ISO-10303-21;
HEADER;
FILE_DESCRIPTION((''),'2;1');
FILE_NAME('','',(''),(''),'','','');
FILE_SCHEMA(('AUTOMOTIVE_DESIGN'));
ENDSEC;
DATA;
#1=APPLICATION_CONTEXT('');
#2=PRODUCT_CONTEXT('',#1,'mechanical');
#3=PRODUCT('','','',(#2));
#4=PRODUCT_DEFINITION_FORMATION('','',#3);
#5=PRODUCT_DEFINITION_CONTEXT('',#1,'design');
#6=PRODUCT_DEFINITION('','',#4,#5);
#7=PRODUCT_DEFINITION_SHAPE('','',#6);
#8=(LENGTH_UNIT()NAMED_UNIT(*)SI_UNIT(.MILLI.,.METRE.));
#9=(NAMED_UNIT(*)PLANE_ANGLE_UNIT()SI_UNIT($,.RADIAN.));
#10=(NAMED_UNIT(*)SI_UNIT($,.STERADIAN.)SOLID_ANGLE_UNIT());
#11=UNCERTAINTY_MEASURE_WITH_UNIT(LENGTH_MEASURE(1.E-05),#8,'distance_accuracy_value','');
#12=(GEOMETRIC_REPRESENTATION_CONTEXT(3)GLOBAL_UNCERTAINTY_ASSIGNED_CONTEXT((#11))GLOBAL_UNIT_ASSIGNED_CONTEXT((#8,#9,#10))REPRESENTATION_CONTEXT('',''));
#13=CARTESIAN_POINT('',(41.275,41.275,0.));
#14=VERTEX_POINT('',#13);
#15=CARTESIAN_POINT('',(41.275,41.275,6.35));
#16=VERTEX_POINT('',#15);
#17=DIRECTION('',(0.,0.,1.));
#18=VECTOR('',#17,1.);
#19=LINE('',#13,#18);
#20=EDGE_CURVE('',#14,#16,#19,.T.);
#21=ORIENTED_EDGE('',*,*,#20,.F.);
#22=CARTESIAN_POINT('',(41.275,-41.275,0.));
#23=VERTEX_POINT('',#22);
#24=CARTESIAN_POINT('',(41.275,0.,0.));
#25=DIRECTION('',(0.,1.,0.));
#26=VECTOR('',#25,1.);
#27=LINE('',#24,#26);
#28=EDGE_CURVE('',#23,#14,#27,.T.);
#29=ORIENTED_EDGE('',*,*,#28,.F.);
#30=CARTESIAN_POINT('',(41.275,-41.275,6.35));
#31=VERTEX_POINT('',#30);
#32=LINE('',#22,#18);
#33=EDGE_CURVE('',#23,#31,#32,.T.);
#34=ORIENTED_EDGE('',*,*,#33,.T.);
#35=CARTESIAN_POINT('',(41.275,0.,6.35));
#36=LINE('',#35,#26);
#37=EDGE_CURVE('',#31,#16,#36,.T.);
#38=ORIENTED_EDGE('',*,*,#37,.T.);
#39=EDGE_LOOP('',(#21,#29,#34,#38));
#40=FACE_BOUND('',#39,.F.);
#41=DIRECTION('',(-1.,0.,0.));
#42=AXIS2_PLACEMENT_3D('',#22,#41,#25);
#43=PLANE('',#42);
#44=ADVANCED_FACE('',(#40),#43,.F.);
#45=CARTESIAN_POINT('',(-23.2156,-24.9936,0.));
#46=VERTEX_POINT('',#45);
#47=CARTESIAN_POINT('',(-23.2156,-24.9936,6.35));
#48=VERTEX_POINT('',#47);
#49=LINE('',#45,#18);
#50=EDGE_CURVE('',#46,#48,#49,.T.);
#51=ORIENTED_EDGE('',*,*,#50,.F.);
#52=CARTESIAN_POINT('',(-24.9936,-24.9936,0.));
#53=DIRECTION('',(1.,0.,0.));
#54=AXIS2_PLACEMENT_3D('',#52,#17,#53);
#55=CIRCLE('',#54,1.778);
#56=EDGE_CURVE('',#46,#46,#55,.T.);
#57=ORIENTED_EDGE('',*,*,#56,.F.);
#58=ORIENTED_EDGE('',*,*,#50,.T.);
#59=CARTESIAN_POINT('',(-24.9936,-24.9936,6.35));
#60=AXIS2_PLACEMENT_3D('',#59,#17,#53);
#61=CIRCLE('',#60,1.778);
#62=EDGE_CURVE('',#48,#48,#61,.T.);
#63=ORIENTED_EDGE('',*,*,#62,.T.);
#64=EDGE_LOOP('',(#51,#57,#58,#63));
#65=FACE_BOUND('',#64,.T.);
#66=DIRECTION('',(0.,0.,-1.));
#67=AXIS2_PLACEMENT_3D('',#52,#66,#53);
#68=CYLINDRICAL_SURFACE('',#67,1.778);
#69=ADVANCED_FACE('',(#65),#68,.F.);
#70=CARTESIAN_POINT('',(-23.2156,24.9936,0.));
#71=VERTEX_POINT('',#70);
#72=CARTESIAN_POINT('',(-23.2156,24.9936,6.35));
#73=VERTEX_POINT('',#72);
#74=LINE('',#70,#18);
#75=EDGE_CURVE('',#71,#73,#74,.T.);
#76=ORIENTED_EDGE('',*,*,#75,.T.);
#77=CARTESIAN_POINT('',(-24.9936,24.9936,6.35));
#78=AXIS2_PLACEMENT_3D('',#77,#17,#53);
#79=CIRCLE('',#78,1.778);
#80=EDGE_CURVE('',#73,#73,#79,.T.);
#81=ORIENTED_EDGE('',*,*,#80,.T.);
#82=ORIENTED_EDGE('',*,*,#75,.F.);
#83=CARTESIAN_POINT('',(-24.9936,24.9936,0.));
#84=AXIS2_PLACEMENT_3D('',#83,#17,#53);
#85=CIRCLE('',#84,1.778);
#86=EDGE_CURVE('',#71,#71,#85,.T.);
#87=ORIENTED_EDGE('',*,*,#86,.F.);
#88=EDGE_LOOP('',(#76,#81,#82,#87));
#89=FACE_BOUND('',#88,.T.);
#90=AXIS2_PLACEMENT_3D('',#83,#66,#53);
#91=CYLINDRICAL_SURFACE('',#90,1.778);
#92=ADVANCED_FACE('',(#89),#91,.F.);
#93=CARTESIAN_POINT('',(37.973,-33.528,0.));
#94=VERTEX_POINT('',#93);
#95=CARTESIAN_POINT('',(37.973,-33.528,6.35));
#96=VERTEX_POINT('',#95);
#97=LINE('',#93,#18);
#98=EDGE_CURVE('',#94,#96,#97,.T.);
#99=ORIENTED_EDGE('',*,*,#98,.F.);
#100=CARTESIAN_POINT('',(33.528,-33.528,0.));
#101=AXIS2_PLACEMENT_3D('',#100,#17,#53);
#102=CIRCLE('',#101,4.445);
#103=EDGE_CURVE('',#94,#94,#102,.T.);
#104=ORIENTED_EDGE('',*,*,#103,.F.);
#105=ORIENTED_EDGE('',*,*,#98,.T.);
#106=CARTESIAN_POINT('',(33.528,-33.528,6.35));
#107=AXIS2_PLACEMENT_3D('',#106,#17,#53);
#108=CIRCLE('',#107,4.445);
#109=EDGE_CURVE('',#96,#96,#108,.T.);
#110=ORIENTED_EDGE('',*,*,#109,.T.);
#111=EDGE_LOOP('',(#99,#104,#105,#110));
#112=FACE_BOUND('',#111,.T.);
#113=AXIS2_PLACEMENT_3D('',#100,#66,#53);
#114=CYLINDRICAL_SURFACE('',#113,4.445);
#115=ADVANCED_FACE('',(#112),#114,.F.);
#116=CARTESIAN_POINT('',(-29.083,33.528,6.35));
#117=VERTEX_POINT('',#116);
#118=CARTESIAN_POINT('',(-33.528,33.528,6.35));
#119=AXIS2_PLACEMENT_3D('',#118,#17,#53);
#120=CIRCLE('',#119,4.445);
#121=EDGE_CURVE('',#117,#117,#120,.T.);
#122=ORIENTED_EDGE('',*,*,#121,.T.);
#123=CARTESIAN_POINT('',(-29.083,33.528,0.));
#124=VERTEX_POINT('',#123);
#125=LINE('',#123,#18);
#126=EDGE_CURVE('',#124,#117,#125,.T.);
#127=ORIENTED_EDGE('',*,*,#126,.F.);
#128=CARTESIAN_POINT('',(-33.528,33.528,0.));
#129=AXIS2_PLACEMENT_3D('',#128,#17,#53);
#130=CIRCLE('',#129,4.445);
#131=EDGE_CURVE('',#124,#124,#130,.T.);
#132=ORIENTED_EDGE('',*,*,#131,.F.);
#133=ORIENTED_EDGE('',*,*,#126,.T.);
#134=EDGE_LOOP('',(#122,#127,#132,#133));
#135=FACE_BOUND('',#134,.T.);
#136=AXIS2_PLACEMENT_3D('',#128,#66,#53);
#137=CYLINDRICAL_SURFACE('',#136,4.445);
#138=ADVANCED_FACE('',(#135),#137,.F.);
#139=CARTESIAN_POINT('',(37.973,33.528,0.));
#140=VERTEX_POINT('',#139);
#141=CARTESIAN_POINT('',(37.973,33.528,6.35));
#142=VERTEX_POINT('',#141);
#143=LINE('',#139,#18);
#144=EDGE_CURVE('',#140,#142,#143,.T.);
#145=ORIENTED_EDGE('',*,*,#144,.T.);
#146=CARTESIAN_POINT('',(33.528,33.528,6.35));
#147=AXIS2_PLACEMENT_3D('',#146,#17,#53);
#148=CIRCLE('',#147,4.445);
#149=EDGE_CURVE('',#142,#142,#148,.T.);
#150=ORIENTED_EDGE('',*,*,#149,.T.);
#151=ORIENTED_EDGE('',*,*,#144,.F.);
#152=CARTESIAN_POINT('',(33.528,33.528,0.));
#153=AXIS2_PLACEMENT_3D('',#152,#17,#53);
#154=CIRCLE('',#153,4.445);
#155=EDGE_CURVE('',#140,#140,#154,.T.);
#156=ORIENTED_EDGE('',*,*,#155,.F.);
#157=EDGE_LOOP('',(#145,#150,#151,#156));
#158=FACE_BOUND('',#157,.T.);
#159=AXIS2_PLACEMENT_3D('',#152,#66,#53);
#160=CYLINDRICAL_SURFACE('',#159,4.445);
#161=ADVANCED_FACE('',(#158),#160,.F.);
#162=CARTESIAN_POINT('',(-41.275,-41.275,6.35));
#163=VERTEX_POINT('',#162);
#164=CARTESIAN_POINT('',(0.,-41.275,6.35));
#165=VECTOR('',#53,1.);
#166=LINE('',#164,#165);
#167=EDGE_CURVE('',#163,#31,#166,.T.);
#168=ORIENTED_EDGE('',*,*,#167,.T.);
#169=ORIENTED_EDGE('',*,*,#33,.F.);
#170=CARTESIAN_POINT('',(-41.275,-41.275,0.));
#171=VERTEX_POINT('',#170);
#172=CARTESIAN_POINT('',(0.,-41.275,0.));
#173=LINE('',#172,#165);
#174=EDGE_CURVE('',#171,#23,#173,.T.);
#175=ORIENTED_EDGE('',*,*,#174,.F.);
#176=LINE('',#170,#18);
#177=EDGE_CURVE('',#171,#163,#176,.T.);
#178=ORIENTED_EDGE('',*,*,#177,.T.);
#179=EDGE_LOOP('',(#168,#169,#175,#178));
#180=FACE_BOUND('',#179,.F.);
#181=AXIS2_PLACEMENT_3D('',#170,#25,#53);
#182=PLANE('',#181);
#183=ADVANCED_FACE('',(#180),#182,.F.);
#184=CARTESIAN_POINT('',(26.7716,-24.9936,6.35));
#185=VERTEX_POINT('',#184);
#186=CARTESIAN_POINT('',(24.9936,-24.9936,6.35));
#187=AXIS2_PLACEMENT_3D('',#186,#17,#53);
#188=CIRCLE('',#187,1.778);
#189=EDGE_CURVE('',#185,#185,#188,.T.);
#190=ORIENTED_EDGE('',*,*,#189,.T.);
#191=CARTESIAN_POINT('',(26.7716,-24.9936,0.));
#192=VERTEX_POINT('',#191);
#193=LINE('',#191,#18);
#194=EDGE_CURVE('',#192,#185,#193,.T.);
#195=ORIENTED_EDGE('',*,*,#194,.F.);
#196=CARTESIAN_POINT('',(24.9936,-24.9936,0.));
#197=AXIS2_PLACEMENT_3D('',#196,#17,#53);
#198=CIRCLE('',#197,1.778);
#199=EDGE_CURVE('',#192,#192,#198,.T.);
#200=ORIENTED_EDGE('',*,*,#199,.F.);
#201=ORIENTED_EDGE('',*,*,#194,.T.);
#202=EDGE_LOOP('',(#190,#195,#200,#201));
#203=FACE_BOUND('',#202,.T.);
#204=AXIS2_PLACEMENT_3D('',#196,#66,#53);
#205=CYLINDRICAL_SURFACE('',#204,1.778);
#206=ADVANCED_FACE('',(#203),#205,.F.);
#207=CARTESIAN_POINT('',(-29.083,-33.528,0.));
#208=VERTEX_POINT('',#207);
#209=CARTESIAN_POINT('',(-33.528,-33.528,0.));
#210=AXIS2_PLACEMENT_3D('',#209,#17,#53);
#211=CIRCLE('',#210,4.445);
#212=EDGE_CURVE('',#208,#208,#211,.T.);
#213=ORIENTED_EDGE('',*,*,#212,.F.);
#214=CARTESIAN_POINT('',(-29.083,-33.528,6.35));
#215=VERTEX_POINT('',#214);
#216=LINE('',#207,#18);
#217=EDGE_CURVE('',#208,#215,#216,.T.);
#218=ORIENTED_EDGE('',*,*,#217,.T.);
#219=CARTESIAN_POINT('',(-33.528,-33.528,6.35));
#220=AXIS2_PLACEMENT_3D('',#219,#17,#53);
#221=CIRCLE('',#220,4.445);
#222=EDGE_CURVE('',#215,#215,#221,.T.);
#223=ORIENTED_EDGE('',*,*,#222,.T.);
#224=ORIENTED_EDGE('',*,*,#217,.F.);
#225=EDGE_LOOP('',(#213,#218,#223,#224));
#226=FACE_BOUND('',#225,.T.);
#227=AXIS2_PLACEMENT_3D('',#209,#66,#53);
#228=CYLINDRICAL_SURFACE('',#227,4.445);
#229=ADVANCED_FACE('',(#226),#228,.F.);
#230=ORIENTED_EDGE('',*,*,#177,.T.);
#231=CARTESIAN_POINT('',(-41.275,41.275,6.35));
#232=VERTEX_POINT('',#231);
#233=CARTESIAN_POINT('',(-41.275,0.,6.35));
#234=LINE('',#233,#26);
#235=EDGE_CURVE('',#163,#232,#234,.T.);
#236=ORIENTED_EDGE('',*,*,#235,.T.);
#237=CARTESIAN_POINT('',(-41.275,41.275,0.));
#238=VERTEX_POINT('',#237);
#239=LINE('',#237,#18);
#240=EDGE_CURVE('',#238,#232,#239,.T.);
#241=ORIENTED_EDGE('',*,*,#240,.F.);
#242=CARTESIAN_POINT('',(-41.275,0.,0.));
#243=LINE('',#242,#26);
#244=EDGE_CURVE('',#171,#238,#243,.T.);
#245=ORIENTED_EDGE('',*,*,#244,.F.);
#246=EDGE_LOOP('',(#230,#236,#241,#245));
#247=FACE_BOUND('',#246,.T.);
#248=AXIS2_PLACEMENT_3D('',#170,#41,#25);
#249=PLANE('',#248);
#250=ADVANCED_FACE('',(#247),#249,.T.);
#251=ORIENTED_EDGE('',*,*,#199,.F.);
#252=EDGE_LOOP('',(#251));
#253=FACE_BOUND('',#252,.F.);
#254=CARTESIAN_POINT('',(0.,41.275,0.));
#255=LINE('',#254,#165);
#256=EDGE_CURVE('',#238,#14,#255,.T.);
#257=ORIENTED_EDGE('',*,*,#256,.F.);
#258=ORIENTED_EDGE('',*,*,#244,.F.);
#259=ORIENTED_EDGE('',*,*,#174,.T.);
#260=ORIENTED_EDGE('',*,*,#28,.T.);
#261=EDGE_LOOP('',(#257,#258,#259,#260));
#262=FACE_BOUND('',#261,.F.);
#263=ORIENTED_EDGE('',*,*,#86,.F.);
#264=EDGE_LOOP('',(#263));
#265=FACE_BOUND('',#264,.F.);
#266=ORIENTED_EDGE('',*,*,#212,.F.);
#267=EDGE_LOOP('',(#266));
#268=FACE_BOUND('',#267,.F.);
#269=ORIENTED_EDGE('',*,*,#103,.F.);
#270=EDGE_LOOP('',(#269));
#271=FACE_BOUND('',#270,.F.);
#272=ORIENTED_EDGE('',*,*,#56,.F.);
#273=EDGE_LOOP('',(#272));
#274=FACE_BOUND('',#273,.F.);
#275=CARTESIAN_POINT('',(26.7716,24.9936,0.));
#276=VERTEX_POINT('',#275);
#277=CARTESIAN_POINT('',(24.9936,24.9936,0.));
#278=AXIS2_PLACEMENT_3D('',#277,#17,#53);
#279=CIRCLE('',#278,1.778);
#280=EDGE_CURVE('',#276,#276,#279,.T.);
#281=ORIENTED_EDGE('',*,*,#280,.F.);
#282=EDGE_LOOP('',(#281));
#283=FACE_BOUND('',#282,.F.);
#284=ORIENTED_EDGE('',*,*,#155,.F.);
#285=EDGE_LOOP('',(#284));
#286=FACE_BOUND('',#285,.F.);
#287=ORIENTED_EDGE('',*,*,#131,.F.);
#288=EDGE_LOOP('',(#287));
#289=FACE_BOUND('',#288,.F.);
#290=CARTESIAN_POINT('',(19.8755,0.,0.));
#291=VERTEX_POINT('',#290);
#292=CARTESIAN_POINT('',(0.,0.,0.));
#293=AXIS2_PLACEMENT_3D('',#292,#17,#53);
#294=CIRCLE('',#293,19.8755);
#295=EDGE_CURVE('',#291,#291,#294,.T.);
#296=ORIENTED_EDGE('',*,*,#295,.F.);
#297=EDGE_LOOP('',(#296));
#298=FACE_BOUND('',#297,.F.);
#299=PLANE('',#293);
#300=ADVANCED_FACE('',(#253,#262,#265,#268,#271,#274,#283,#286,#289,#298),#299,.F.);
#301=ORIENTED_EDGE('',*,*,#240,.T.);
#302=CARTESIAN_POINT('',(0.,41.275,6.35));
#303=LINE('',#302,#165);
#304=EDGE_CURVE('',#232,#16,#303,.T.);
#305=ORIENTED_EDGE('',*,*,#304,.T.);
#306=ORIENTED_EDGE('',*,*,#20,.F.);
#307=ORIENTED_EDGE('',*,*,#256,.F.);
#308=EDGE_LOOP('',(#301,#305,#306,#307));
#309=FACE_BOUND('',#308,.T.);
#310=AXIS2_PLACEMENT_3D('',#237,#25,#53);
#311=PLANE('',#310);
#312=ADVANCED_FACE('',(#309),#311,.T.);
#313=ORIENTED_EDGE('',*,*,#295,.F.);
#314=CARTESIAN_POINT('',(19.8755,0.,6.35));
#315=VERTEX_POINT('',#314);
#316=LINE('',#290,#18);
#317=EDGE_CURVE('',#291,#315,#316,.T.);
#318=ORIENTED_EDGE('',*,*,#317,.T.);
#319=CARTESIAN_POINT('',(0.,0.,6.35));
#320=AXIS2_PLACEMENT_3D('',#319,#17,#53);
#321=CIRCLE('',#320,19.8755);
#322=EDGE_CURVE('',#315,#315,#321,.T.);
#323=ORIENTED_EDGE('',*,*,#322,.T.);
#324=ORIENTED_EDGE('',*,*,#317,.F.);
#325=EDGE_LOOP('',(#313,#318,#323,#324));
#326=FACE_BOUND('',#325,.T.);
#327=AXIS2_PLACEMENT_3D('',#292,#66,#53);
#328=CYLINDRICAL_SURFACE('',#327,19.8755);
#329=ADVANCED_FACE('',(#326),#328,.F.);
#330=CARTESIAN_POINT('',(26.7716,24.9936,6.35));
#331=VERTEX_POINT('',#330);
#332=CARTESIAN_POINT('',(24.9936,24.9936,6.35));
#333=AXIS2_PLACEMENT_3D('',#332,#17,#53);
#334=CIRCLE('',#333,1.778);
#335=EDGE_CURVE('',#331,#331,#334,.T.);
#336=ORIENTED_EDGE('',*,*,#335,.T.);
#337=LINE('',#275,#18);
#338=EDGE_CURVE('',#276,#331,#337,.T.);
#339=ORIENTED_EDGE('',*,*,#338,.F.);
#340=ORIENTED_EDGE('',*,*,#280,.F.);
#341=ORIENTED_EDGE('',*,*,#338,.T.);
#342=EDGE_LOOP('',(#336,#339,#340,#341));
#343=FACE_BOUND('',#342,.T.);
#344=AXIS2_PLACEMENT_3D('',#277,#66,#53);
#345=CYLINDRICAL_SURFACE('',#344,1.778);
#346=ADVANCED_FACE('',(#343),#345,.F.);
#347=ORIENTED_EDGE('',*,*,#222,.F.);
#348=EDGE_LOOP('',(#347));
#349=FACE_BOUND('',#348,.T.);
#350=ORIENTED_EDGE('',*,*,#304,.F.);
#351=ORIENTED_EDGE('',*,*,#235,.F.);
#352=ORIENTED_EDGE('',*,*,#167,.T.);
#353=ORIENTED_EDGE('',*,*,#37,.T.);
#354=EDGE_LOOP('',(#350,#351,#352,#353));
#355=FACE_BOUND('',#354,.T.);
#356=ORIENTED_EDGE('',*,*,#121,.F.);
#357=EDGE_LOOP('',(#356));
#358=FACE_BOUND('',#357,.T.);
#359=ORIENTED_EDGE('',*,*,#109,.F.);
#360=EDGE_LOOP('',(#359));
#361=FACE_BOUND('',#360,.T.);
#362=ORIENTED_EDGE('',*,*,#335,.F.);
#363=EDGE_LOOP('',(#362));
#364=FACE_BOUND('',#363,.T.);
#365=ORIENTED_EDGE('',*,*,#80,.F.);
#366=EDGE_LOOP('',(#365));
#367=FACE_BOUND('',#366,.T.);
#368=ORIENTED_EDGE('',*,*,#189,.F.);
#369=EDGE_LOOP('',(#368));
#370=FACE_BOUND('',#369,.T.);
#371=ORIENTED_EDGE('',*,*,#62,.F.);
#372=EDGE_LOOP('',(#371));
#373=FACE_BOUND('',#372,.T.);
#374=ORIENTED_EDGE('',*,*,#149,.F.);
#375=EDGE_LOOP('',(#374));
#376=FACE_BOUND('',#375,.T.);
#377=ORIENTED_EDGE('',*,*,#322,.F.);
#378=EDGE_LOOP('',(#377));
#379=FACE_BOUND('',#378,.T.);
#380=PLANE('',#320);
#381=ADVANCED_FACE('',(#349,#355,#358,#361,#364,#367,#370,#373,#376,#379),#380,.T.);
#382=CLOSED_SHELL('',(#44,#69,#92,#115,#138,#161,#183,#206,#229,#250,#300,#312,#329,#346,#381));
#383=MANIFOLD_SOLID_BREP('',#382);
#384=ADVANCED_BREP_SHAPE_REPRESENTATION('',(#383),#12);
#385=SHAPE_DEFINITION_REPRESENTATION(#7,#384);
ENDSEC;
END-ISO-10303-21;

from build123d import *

# Parameters (mm, degrees)
F0_W     = 82.55
F0_H     = 82.55
F0_R     = 4.445
F0_R_2   = 1.778
F0_R_3   = 19.8755
F1_DEPTH = 6.35


# Not quite as in the source:
# - a length typed as a fraction of an inch, garbled in the dataset ("3 / 203.2 mm" for 3/8 in), is restored


with BuildPart() as f1:
    # F0 (on Top) → F1 (new body)
    with BuildSketch(Plane.XY):
        Rectangle(F0_W, F0_H)
        with Locations((-33.528, -33.528)):
            Circle(F0_R, mode=Mode.SUBTRACT)
        with Locations((-24.9936, -24.9936)):
            Circle(F0_R_2, mode=Mode.SUBTRACT)
        with Locations((33.528, -33.528)):
            Circle(F0_R, mode=Mode.SUBTRACT)
        with Locations((24.9936, -24.9936)):
            Circle(F0_R_2, mode=Mode.SUBTRACT)
        with Locations((-24.9936, 24.9936)):
            Circle(F0_R_2, mode=Mode.SUBTRACT)
        with Locations((-33.528, 33.528)):
            Circle(F0_R, mode=Mode.SUBTRACT)
        Circle(F0_R_3, mode=Mode.SUBTRACT)
        with Locations((24.9936, 24.9936)):
            Circle(F0_R_2, mode=Mode.SUBTRACT)
        with Locations((33.528, 33.528)):
            Circle(F0_R, mode=Mode.SUBTRACT)
    extrude(amount=F1_DEPTH)


solid = f1.part
